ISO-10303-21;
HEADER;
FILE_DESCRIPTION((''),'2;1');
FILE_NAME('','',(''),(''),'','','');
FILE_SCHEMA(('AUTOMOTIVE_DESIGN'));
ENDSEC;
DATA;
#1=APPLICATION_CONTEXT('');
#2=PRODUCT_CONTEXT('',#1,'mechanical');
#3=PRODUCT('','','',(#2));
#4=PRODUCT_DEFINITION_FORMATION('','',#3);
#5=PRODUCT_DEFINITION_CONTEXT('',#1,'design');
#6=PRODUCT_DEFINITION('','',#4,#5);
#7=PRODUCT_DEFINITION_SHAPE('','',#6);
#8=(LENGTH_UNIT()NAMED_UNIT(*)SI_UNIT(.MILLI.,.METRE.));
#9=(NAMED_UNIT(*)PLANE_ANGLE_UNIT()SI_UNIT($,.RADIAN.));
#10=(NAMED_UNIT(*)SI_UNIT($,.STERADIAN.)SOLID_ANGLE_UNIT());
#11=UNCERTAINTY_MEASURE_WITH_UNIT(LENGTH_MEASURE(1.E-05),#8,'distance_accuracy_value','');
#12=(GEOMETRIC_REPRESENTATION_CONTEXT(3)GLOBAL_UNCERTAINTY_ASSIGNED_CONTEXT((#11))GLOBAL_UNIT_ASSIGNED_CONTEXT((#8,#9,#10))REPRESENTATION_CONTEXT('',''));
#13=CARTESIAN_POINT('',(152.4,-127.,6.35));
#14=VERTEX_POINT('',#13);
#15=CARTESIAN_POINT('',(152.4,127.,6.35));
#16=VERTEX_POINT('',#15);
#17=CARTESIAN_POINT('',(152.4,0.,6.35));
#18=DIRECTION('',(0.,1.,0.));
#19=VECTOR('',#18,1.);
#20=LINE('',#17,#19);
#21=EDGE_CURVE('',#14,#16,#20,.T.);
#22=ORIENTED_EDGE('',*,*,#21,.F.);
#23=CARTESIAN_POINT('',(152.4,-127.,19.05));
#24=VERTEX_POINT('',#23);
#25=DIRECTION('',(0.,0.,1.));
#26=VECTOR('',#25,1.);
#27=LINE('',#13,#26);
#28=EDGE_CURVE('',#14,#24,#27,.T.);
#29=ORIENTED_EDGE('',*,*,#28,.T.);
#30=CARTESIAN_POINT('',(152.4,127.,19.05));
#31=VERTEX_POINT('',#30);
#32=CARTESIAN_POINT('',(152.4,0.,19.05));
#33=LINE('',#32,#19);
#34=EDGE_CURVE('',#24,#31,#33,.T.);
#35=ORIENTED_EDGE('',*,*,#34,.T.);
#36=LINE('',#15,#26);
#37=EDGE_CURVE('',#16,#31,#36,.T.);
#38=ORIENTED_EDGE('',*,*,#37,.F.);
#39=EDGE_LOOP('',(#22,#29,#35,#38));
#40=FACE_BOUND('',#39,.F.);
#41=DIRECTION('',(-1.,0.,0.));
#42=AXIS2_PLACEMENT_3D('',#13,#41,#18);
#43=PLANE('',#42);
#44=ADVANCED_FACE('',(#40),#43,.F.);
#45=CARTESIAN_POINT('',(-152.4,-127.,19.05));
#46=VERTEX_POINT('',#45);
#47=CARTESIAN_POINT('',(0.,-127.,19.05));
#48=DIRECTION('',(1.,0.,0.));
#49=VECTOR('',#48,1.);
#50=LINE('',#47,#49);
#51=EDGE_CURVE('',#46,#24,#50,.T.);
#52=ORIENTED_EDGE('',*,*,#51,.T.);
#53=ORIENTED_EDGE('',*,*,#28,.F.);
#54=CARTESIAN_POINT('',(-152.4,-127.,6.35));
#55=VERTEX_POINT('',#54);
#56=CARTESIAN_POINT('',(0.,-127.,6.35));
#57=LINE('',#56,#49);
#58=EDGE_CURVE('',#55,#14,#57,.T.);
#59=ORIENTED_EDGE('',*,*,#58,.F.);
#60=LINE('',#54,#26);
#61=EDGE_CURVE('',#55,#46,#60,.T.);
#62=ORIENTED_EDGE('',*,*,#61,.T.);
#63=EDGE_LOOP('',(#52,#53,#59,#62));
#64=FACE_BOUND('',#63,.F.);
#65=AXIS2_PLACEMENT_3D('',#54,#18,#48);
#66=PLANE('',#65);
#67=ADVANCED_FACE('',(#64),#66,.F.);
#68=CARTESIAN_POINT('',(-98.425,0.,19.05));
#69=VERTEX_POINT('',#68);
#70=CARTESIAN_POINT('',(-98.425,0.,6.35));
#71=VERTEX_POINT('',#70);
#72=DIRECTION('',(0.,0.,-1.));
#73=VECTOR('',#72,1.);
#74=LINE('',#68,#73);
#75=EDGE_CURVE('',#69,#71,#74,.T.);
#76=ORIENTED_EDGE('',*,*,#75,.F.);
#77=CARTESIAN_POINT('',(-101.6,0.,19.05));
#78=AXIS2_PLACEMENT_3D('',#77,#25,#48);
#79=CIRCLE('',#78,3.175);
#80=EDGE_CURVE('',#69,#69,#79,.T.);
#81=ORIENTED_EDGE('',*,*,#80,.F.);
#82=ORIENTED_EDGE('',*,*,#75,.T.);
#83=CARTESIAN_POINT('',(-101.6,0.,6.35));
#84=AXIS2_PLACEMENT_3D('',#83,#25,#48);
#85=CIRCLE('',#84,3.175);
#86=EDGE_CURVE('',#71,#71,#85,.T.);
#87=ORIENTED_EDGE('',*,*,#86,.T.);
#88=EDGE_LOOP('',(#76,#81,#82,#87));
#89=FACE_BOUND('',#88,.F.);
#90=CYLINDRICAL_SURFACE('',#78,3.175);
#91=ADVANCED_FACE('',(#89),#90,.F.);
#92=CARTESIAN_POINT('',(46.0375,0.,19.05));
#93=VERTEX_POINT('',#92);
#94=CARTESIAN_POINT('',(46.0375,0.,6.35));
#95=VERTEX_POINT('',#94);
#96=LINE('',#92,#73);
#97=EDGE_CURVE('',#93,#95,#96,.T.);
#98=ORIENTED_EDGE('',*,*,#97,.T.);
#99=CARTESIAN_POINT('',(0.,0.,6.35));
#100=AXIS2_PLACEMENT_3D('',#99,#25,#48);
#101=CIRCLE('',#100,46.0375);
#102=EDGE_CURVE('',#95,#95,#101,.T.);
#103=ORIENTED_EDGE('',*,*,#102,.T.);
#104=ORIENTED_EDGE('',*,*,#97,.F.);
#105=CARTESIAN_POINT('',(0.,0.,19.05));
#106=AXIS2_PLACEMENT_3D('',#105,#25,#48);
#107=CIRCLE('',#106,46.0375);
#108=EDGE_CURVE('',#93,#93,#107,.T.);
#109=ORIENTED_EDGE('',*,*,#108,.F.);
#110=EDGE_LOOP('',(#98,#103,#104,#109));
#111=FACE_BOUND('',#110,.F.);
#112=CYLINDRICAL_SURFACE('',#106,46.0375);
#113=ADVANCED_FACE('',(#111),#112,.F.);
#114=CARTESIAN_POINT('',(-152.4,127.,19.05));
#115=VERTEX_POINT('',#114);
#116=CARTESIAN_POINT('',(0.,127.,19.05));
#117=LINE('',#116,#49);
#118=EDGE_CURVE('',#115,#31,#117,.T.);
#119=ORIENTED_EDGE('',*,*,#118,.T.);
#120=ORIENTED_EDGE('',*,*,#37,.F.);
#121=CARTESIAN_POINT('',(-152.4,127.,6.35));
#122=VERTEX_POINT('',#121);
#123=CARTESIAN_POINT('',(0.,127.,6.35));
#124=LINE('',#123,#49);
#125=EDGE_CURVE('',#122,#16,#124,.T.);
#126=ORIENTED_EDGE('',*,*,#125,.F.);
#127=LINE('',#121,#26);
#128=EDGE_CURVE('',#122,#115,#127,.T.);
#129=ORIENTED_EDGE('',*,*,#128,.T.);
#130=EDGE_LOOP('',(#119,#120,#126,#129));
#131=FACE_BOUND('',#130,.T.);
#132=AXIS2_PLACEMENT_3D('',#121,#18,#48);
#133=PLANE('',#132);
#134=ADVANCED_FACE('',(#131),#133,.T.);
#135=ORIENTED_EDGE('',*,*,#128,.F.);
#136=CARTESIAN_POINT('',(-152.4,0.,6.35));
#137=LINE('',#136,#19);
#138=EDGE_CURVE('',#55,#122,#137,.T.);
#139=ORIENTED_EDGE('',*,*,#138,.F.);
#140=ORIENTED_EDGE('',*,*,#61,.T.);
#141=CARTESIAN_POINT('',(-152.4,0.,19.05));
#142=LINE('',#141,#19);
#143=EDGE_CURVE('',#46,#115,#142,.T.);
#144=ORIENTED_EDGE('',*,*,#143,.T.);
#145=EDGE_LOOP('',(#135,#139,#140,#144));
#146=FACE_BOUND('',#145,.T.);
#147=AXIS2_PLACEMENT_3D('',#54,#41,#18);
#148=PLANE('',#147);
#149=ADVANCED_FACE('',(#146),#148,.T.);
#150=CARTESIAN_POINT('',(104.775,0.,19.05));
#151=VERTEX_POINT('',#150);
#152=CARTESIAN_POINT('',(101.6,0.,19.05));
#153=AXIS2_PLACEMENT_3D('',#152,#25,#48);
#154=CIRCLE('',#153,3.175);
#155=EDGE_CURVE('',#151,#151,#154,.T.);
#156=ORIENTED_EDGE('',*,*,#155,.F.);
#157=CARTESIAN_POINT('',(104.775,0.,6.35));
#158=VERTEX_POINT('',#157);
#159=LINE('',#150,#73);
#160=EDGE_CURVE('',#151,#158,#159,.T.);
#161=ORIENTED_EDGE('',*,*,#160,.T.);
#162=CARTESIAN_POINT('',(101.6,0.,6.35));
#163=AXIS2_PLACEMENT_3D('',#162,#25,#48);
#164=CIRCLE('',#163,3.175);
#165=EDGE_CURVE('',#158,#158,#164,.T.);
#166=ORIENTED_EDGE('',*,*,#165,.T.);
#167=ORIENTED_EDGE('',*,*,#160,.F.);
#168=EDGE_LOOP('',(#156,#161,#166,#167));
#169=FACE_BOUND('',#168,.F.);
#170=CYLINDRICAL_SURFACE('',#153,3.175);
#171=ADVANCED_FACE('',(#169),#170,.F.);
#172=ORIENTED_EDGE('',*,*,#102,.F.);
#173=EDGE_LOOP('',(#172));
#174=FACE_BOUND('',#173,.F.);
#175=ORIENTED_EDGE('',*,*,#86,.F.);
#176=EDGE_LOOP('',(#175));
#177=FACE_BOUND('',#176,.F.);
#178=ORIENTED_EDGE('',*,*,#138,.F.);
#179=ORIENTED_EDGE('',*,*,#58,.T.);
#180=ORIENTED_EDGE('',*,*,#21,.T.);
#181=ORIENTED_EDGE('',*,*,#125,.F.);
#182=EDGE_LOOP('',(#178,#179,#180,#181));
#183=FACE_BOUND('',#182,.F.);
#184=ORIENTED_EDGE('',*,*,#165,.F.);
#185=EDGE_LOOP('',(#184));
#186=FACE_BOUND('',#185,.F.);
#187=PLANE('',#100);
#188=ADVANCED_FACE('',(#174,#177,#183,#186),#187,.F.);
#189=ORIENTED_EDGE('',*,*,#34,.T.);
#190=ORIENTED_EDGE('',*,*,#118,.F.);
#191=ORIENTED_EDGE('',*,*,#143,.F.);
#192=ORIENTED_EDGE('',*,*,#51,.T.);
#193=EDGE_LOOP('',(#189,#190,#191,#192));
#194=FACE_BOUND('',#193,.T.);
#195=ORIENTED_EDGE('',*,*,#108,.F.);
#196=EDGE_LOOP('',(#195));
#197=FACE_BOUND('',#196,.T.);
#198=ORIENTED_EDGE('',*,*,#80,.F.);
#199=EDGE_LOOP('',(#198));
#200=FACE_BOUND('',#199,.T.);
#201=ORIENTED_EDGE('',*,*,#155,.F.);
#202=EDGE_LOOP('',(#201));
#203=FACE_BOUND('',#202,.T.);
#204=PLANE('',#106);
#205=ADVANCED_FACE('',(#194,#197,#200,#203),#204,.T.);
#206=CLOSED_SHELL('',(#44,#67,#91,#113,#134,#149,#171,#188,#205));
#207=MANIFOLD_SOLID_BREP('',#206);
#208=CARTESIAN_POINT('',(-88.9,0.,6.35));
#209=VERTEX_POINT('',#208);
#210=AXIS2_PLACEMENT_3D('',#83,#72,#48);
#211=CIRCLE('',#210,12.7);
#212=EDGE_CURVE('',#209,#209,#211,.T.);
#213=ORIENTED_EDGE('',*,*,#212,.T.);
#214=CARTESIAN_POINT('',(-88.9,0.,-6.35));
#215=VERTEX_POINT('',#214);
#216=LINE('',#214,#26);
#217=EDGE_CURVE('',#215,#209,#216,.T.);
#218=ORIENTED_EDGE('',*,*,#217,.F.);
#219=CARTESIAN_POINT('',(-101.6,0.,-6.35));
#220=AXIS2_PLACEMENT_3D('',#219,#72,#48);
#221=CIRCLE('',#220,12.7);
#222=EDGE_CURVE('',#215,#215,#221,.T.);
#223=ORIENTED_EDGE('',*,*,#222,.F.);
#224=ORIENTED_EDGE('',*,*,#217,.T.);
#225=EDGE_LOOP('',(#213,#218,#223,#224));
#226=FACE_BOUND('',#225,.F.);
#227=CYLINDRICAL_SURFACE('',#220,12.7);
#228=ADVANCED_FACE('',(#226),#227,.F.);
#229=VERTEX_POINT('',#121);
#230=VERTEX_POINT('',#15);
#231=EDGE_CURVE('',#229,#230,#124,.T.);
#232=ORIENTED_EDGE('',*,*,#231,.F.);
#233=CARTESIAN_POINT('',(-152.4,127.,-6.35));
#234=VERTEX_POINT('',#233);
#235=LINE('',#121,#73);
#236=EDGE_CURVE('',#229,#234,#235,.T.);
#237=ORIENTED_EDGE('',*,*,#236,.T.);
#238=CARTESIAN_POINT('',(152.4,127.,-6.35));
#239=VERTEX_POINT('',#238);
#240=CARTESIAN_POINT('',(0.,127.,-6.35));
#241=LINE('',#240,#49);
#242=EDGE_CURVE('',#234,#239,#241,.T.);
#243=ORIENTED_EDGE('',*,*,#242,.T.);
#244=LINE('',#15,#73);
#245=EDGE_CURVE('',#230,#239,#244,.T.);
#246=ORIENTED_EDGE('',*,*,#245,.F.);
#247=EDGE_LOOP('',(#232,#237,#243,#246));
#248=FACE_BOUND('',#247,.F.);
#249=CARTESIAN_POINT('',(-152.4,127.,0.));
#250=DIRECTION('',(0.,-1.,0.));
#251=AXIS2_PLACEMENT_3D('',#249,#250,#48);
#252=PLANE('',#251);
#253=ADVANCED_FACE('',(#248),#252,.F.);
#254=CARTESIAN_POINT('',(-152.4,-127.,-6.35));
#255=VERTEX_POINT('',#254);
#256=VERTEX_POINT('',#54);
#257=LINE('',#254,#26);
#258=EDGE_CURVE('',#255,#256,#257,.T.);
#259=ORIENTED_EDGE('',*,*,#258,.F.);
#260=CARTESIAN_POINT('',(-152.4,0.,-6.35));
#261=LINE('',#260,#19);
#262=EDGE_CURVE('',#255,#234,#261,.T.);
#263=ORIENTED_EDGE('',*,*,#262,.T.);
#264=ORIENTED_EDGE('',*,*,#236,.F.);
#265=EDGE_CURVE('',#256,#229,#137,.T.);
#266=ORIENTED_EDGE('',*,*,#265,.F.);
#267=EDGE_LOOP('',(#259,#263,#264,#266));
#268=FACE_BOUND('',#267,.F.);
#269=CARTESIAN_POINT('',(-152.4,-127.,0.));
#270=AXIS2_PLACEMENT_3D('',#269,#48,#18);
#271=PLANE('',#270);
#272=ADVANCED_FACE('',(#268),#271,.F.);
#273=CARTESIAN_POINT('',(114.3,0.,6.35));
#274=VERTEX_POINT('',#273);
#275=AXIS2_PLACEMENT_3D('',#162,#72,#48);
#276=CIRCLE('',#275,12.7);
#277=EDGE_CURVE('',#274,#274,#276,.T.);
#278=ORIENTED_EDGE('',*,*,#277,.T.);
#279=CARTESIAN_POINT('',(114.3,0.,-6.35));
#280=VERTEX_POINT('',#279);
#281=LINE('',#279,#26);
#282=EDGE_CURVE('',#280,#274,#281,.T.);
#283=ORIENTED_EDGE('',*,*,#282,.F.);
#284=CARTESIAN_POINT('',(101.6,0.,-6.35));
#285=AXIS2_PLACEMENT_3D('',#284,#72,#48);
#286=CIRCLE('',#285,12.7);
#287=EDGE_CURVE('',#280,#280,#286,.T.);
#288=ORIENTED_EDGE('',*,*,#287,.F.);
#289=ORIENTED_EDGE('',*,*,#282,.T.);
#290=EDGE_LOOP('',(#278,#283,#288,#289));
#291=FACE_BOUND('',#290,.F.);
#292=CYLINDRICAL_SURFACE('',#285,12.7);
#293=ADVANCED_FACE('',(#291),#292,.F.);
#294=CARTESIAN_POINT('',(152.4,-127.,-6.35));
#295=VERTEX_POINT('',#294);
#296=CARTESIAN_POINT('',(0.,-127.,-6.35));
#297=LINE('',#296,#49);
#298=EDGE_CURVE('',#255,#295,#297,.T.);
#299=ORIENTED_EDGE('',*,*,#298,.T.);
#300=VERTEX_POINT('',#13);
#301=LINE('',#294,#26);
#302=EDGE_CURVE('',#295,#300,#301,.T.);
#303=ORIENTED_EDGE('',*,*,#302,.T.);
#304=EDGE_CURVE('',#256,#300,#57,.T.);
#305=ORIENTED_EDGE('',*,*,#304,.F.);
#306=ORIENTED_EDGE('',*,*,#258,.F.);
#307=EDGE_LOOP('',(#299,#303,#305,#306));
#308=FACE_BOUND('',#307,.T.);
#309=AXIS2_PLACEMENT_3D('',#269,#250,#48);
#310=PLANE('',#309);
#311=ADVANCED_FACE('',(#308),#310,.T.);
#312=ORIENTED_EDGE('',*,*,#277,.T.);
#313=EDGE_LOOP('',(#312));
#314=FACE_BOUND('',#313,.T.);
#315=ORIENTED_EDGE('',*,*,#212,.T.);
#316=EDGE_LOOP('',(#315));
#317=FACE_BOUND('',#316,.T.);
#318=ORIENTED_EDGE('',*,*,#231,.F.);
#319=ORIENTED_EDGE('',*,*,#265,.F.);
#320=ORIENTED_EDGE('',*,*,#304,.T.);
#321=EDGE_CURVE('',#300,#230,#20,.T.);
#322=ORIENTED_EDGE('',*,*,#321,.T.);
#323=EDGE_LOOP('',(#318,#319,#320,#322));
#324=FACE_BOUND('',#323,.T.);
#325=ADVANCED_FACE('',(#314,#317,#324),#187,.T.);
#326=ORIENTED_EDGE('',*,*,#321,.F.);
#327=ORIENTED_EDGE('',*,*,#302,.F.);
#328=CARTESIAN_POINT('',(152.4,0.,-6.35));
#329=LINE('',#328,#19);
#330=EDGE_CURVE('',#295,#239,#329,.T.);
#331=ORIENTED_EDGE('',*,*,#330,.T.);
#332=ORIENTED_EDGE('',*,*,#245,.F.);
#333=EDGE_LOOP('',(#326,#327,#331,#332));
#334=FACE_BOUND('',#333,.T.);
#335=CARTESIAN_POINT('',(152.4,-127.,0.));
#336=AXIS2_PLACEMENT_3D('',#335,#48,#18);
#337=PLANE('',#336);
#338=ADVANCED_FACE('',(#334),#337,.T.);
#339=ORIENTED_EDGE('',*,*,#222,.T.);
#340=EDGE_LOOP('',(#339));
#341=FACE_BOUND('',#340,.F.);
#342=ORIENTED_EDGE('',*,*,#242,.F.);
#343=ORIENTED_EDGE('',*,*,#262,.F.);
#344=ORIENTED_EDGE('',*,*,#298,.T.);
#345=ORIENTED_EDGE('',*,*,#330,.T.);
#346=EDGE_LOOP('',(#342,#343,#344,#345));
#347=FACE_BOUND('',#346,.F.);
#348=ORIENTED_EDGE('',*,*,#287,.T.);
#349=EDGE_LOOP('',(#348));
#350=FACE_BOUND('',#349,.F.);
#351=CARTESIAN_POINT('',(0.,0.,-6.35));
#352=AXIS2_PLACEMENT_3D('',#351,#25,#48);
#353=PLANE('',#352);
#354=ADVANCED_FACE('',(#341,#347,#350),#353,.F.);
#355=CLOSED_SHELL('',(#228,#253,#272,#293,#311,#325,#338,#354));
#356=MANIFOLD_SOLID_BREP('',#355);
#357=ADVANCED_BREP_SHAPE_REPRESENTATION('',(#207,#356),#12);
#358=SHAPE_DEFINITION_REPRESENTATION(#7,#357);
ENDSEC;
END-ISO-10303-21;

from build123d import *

# Parameters (mm, degrees)
F0_W     = 304.8
F0_H     = 254
F1_DEPTH = 6.35
F2_DEPTH = 12.7
F3_R     = 46.0375
F4_DEPTH = 25.401
F5_R     = 12.7
F6_DEPTH = 25.4
F7_R     = 3.175
F8_DEPTH = 25.401


with BuildPart() as f1:
    # F0 (on Top) → F1 (new body, symmetric)
    with BuildSketch(Plane.XY):
        Rectangle(F0_W, F0_H)
    extrude(amount=F1_DEPTH, both=True)


with BuildPart() as f2:
    # F2 (new): a face of the model
    f2_faces = [f1.part.faces().sort_by_distance(p)[0] for p in [
        (0, 0, 6.35),
    ]]
    extrude(f2_faces, amount=F2_DEPTH)

    # F3 (on face) → F4 (cut, through all)
    with BuildSketch(Plane.XY.offset(19.05)):
        Circle(F3_R)
    extrude(amount=-F4_DEPTH, mode=Mode.SUBTRACT)

    # F7 (on face) → F8 (cut, through all)
    with BuildSketch(Plane.XY.offset(19.05)):
        with Locations((-101.6, 0)):
            Circle(F7_R)
        with Locations((101.6, 0)):
            Circle(F7_R)
    extrude(amount=-F8_DEPTH, mode=Mode.SUBTRACT)


with BuildPart() as f1_1:
    add(f1.part)

    # F5 (on face) → F6 (cut)
    with BuildSketch(Plane(origin=(0, 0, -6.35), x_dir=(1, 0, 0), z_dir=(0, 0, -1))):
        with Locations((-101.6, 0)):
            Circle(F5_R)
        with Locations((101.6, 0)):
            Circle(F5_R)
    extrude(amount=-F6_DEPTH, mode=Mode.SUBTRACT)


solid = Compound([f2.part, f1_1.part])
